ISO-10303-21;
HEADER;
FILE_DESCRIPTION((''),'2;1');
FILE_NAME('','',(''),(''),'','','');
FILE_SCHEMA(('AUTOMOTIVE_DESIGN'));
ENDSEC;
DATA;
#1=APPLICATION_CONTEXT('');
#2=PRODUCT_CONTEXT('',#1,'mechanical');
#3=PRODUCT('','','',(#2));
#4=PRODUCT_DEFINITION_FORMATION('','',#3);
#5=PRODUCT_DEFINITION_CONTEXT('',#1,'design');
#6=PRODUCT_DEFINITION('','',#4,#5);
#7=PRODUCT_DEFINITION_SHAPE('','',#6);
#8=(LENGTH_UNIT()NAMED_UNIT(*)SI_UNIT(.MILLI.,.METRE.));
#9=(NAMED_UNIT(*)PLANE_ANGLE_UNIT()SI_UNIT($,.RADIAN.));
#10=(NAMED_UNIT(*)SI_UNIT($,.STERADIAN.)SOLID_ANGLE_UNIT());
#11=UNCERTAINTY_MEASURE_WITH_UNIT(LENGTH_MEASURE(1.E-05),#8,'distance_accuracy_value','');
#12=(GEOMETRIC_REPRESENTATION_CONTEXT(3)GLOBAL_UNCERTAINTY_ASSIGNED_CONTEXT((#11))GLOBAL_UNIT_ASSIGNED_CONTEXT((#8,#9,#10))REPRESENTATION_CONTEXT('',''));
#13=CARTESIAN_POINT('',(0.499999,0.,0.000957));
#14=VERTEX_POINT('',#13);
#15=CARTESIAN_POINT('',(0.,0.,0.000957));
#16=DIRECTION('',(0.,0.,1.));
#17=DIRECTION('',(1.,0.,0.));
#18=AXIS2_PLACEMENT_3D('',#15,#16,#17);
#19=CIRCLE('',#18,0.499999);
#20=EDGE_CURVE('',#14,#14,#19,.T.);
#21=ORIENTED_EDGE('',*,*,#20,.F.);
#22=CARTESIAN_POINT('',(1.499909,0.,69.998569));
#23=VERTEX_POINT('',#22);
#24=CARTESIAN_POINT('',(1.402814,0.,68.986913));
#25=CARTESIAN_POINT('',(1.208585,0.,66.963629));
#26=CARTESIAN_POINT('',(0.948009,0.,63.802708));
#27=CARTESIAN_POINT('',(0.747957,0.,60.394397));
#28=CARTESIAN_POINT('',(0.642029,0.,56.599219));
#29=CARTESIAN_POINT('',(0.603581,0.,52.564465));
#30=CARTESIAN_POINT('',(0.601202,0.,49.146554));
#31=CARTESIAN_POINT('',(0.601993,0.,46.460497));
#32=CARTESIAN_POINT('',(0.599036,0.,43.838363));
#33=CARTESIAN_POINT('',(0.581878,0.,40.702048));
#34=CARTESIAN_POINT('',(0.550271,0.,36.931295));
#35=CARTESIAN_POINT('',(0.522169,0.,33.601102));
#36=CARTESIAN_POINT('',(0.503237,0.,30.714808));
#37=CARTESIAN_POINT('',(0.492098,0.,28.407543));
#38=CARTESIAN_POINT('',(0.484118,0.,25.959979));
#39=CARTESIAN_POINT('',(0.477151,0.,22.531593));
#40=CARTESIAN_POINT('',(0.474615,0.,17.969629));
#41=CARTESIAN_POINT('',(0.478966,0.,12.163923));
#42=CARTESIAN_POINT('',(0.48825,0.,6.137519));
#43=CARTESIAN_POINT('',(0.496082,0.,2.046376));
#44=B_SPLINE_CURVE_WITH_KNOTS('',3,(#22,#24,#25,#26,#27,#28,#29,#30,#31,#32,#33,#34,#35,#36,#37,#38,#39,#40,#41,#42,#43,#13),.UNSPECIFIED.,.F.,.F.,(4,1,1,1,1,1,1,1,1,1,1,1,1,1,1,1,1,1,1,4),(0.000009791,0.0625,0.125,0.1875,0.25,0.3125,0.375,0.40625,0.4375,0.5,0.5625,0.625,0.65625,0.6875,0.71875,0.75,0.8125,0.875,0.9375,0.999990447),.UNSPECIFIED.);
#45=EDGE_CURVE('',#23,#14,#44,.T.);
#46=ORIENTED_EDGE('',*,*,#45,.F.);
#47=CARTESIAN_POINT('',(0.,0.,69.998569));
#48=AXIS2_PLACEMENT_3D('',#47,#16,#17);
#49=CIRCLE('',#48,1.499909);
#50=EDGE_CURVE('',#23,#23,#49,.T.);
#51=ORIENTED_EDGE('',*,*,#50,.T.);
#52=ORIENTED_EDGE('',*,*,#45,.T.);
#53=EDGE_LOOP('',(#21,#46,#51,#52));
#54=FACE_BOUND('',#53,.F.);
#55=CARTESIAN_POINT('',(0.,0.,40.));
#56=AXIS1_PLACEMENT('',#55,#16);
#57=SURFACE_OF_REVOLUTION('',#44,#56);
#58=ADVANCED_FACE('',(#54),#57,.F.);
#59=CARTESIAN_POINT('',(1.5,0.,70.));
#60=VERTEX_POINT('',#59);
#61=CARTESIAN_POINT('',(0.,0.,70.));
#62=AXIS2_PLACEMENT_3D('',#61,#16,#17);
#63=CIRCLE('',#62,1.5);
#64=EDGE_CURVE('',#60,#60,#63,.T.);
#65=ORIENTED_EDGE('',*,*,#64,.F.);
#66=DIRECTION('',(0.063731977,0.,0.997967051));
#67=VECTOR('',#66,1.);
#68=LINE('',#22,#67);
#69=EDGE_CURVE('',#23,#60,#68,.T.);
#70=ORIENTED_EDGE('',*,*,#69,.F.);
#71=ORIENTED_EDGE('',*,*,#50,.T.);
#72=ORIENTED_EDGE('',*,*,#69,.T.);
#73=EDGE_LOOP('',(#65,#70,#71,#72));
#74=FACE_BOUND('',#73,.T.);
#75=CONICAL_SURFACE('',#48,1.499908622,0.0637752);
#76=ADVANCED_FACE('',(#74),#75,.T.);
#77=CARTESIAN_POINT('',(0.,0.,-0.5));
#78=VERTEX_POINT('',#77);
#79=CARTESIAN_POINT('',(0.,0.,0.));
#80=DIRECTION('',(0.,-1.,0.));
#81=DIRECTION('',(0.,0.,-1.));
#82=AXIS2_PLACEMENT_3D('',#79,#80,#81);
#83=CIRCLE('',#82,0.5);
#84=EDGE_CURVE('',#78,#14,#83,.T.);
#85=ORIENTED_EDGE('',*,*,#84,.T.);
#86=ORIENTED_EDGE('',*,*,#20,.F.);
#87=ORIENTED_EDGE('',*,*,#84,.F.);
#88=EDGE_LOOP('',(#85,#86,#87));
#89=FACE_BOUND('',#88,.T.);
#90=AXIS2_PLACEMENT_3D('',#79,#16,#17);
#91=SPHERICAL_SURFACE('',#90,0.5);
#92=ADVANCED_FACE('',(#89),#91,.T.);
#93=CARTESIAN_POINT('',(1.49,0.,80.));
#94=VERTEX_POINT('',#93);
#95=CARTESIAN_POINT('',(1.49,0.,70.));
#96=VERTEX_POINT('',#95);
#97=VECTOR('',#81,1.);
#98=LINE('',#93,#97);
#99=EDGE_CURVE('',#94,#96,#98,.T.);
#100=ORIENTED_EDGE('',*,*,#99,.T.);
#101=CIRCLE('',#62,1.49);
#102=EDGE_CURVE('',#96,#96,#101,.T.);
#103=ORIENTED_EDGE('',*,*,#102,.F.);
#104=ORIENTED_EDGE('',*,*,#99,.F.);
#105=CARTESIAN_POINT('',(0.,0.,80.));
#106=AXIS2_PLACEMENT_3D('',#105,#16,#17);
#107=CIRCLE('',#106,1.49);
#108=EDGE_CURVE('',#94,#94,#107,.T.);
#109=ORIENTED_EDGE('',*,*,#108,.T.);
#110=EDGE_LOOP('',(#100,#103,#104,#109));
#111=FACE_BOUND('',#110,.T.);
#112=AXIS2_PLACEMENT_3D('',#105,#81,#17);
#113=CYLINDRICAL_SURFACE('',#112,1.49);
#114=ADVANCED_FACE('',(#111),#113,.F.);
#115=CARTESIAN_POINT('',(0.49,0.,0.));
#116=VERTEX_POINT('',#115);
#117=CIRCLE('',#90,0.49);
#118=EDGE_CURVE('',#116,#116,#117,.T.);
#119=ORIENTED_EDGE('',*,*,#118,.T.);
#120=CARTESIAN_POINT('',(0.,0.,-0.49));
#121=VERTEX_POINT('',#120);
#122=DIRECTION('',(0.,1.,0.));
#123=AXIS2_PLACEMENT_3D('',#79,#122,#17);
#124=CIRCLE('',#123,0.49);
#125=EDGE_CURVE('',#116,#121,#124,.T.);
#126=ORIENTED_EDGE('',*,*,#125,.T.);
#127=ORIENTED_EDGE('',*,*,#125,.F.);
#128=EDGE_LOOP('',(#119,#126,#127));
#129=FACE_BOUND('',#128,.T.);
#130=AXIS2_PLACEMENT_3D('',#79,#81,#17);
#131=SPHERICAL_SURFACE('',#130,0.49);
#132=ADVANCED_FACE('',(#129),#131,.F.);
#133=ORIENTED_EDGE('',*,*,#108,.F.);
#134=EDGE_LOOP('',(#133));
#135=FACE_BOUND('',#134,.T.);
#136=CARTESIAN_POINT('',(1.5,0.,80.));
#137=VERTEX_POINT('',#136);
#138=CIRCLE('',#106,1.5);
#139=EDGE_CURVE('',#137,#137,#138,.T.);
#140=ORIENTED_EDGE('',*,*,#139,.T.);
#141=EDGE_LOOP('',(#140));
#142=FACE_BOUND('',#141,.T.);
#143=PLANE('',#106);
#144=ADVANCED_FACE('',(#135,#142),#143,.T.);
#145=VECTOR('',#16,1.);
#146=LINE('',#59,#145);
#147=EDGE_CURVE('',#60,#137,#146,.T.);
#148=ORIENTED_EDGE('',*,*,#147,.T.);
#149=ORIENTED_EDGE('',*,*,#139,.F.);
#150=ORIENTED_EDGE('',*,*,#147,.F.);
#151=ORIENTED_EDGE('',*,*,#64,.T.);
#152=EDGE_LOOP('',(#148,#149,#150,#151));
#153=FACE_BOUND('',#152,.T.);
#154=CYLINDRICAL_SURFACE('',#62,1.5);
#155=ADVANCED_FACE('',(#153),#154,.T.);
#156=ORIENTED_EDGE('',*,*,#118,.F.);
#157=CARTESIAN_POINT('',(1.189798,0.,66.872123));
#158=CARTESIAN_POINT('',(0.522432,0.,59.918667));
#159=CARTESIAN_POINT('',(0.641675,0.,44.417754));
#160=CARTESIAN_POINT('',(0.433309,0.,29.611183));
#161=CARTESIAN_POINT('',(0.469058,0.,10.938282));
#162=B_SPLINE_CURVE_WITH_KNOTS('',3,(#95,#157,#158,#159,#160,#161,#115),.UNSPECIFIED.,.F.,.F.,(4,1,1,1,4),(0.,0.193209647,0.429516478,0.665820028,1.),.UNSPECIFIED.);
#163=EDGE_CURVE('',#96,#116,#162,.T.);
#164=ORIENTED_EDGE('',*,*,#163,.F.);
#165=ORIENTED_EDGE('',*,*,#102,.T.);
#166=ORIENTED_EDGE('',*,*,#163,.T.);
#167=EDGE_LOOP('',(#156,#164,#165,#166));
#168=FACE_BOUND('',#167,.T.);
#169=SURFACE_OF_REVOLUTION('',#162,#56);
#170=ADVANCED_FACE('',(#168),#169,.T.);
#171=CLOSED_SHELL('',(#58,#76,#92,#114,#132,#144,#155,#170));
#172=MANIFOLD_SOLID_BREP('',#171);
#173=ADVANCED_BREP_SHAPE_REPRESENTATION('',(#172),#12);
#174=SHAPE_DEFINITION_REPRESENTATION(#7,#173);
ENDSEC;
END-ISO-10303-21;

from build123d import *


# Not quite as in the source:
# - ends of sketch curves that miss each other by under 0.0002 mm in the source are joined
# - the dataset's text gives a spline's control points without its knots; the knots are read off the source's solid


with BuildPart() as f1:
    # F0 (on Front) → F1 (revolve)
    with BuildSketch(Plane.XZ):
        with BuildLine():
            Line((1.5, 80), (1.49, 80))
            Line((1.49, 80), (1.49, 70))
            add(Edge.make_bspline(
                [(1.49, 70), (1.1897983225, 66.8721229494), (0.5224322281, 59.9186671645), (0.6416749933, 44.4177535042), (0.4333089579, 29.6111831977), (0.4690584997, 10.9382819568), (0.49, 0)],
                knots=[0, 0, 0, 0, 0.1932096466, 0.4295164782, 0.6658200281, 1, 1, 1, 1], degree=3))
            ThreePointArc((0.49, 0), (0.3464823228, -0.3464823228), (0, -0.49))
            Line((0, -0.49), (0, -0.5))
            ThreePointArc((0, -0.5), (0.3538916697, -0.3532147875), (0.4999990837, 0.0009572555))
            add(Edge.make_bspline(
                [(1.4999086219, 69.9985691275), (1.4028137471, 68.9869131903), (1.2085847069, 66.9636288325), (0.9480089106, 63.8027077269), (0.7479566181, 60.3943974582), (0.6420287243, 56.5992185989), (0.6035813453, 52.5644646836), (0.6012019408, 49.1465540782), (0.6019932964, 46.4604972796), (0.5990362983, 43.838363027), (0.5818777012, 40.7020480392), (0.550270693, 36.9312953236), (0.5221685074, 33.601101934), (0.5032373155, 30.7148084657), (0.4920978701, 28.4075433872), (0.4841182848, 25.9599787242), (0.4771506194, 22.5315925844), (0.4746150972, 17.9696289095), (0.4789662342, 12.1639232621), (0.4882498116, 6.1375192021), (0.4960822008, 2.0463764302), (0.4999990837, 0.0009572555)],
                knots=[9.7906e-06, 9.7906e-06, 9.7906e-06, 9.7906e-06, 0.0625, 0.125, 0.1875, 0.25, 0.3125, 0.375, 0.40625, 0.4375, 0.5, 0.5625, 0.625, 0.65625, 0.6875, 0.71875, 0.75, 0.8125, 0.875, 0.9375, 0.9999904465, 0.9999904465, 0.9999904465, 0.9999904465], degree=3))
            Line((1.4999086219, 69.9985691275), (1.5, 70))
            Line((1.5, 70), (1.5, 80))
        make_face()
    revolve(axis=Axis((0, 0, 40), (0, 0, 1)))


solid = f1.part
